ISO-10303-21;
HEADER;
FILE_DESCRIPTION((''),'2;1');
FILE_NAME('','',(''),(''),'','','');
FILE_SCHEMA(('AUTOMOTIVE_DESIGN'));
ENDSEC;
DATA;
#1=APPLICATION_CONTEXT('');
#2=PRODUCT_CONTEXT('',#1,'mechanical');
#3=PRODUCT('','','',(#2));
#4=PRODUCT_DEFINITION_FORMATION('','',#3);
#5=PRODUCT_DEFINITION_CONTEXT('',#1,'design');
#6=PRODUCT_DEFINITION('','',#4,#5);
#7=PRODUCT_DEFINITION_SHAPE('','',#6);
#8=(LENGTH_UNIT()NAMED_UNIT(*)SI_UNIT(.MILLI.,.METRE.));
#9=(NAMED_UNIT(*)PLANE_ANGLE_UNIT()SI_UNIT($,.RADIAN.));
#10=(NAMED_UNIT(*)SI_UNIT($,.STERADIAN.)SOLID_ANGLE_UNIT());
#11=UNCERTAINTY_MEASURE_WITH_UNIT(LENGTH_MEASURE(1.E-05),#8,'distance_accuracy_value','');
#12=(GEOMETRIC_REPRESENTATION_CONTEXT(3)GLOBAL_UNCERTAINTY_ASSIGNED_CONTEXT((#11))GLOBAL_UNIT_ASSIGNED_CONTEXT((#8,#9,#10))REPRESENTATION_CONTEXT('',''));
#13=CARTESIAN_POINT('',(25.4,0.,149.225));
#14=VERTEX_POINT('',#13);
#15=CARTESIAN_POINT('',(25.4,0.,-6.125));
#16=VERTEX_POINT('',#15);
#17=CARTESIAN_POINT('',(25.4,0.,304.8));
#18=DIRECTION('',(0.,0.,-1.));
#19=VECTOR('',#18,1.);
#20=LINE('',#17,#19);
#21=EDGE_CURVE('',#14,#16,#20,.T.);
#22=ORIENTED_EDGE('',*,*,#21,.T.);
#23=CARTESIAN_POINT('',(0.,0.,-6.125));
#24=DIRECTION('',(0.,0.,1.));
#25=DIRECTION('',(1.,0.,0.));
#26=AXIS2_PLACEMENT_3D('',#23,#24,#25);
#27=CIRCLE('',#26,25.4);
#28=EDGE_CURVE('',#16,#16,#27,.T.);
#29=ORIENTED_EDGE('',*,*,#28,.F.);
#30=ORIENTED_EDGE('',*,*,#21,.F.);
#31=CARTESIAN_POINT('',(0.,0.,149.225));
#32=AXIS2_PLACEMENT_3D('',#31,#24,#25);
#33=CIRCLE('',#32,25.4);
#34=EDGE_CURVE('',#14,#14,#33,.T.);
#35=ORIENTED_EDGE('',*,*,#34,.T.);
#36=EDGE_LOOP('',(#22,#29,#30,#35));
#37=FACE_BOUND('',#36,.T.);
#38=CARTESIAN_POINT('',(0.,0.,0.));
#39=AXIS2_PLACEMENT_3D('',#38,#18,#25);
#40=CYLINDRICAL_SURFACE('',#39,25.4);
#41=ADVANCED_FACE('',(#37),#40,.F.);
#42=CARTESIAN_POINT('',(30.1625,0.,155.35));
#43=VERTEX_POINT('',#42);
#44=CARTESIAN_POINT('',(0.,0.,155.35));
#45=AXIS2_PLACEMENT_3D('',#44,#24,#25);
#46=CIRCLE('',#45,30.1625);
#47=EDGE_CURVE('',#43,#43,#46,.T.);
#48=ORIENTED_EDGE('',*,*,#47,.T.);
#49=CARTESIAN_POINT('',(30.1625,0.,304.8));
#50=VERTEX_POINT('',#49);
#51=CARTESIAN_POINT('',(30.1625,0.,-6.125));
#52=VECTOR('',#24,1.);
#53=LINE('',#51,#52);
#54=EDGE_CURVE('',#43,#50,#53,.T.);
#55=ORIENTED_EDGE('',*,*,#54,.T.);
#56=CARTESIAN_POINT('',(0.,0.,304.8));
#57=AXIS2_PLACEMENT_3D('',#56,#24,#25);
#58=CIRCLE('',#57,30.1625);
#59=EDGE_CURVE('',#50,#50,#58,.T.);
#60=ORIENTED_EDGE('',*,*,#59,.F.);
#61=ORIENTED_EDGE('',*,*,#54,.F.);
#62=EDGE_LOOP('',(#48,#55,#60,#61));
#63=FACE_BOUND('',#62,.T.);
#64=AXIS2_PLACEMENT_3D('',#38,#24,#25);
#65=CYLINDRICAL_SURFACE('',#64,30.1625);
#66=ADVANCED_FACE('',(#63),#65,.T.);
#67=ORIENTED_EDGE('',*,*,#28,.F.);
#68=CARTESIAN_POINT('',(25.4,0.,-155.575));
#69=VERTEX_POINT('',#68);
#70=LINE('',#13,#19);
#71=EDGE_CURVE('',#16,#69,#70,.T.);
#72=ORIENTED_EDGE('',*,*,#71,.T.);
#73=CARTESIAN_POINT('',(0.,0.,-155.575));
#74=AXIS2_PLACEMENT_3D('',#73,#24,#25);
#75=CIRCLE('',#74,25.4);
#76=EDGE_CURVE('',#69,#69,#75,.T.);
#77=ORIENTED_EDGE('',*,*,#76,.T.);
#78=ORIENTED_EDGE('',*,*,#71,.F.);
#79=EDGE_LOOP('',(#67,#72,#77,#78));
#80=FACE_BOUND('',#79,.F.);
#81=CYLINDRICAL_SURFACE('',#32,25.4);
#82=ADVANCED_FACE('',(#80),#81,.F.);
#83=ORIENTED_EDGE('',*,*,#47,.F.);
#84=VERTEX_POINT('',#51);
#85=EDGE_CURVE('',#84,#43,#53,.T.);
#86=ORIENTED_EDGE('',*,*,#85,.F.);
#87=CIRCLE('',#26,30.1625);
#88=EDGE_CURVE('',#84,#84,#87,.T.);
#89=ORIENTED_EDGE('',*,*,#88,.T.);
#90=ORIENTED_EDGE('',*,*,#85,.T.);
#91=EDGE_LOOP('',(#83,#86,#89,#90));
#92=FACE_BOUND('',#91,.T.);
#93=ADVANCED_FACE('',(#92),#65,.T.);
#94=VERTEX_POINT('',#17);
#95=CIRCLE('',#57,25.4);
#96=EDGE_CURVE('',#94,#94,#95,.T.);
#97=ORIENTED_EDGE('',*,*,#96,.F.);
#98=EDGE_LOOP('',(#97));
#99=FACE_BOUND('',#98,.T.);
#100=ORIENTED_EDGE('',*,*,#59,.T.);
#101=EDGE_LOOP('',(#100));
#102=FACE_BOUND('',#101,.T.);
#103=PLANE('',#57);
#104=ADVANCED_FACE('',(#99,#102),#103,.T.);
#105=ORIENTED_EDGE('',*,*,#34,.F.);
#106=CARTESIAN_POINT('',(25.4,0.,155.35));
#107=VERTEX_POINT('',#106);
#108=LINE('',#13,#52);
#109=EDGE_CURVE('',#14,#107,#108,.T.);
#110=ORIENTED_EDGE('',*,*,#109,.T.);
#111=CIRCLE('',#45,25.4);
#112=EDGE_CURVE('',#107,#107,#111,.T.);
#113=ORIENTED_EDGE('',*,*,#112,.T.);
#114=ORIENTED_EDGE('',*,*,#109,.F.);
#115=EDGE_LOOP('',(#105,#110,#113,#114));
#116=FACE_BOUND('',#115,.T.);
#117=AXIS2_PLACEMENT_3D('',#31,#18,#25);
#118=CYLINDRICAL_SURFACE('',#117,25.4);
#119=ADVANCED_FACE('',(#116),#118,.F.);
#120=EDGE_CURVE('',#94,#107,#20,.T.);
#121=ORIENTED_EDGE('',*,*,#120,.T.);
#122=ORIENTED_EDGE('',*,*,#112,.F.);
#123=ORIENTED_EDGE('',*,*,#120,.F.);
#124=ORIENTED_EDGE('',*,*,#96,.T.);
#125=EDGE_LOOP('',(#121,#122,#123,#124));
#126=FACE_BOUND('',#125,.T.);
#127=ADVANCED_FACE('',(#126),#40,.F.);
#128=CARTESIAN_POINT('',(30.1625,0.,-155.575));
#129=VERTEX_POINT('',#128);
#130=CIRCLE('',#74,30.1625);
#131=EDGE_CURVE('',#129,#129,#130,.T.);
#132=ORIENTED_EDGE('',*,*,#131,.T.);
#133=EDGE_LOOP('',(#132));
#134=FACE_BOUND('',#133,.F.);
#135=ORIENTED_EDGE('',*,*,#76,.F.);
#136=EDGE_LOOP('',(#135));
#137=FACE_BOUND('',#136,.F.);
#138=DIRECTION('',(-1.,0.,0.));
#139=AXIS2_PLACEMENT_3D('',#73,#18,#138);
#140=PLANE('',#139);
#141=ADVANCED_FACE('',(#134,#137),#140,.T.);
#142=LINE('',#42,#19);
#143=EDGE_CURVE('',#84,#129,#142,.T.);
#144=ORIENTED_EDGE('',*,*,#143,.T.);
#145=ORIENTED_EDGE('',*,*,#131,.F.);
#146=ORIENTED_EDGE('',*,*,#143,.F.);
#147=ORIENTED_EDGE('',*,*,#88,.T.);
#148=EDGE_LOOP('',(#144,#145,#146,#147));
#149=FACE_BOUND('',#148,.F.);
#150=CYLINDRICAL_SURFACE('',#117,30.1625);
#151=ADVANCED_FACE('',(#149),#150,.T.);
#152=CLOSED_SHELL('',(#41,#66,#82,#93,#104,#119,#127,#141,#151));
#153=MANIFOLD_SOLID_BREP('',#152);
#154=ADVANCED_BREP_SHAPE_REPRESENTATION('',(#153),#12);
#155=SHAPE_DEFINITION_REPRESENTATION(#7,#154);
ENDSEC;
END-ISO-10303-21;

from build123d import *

# Parameters (mm, degrees)
F0_R          = 30.1625
F0_R_2        = 25.4
F1_DEPTH      = 304.8
F1_DEPTH_BACK = 6.125


# Not quite as in the source:
# - a pattern or mirror of a feature is missing from the dataset's text; its kind, count and spacing are read off the source's solid


with BuildPart() as f1:
    # F0 (on Top) → F1 (new body, two sides)
    with BuildSketch(Plane.XY) as f1_sk:
        Circle(F0_R)
        Circle(F0_R_2, mode=Mode.SUBTRACT)
    extrude(amount=F1_DEPTH)
    extrude(f1_sk.sketch, amount=-F1_DEPTH_BACK)

    # F1_copies: F1 across plane


with BuildPart() as f1_1:
    add(f1.part)
    add(f1.part.mirror(Plane(origin=(0, 0, 74.6125), x_dir=(-1, 0, 0), z_dir=(0, 0, -1))))


solid = f1_1.part
